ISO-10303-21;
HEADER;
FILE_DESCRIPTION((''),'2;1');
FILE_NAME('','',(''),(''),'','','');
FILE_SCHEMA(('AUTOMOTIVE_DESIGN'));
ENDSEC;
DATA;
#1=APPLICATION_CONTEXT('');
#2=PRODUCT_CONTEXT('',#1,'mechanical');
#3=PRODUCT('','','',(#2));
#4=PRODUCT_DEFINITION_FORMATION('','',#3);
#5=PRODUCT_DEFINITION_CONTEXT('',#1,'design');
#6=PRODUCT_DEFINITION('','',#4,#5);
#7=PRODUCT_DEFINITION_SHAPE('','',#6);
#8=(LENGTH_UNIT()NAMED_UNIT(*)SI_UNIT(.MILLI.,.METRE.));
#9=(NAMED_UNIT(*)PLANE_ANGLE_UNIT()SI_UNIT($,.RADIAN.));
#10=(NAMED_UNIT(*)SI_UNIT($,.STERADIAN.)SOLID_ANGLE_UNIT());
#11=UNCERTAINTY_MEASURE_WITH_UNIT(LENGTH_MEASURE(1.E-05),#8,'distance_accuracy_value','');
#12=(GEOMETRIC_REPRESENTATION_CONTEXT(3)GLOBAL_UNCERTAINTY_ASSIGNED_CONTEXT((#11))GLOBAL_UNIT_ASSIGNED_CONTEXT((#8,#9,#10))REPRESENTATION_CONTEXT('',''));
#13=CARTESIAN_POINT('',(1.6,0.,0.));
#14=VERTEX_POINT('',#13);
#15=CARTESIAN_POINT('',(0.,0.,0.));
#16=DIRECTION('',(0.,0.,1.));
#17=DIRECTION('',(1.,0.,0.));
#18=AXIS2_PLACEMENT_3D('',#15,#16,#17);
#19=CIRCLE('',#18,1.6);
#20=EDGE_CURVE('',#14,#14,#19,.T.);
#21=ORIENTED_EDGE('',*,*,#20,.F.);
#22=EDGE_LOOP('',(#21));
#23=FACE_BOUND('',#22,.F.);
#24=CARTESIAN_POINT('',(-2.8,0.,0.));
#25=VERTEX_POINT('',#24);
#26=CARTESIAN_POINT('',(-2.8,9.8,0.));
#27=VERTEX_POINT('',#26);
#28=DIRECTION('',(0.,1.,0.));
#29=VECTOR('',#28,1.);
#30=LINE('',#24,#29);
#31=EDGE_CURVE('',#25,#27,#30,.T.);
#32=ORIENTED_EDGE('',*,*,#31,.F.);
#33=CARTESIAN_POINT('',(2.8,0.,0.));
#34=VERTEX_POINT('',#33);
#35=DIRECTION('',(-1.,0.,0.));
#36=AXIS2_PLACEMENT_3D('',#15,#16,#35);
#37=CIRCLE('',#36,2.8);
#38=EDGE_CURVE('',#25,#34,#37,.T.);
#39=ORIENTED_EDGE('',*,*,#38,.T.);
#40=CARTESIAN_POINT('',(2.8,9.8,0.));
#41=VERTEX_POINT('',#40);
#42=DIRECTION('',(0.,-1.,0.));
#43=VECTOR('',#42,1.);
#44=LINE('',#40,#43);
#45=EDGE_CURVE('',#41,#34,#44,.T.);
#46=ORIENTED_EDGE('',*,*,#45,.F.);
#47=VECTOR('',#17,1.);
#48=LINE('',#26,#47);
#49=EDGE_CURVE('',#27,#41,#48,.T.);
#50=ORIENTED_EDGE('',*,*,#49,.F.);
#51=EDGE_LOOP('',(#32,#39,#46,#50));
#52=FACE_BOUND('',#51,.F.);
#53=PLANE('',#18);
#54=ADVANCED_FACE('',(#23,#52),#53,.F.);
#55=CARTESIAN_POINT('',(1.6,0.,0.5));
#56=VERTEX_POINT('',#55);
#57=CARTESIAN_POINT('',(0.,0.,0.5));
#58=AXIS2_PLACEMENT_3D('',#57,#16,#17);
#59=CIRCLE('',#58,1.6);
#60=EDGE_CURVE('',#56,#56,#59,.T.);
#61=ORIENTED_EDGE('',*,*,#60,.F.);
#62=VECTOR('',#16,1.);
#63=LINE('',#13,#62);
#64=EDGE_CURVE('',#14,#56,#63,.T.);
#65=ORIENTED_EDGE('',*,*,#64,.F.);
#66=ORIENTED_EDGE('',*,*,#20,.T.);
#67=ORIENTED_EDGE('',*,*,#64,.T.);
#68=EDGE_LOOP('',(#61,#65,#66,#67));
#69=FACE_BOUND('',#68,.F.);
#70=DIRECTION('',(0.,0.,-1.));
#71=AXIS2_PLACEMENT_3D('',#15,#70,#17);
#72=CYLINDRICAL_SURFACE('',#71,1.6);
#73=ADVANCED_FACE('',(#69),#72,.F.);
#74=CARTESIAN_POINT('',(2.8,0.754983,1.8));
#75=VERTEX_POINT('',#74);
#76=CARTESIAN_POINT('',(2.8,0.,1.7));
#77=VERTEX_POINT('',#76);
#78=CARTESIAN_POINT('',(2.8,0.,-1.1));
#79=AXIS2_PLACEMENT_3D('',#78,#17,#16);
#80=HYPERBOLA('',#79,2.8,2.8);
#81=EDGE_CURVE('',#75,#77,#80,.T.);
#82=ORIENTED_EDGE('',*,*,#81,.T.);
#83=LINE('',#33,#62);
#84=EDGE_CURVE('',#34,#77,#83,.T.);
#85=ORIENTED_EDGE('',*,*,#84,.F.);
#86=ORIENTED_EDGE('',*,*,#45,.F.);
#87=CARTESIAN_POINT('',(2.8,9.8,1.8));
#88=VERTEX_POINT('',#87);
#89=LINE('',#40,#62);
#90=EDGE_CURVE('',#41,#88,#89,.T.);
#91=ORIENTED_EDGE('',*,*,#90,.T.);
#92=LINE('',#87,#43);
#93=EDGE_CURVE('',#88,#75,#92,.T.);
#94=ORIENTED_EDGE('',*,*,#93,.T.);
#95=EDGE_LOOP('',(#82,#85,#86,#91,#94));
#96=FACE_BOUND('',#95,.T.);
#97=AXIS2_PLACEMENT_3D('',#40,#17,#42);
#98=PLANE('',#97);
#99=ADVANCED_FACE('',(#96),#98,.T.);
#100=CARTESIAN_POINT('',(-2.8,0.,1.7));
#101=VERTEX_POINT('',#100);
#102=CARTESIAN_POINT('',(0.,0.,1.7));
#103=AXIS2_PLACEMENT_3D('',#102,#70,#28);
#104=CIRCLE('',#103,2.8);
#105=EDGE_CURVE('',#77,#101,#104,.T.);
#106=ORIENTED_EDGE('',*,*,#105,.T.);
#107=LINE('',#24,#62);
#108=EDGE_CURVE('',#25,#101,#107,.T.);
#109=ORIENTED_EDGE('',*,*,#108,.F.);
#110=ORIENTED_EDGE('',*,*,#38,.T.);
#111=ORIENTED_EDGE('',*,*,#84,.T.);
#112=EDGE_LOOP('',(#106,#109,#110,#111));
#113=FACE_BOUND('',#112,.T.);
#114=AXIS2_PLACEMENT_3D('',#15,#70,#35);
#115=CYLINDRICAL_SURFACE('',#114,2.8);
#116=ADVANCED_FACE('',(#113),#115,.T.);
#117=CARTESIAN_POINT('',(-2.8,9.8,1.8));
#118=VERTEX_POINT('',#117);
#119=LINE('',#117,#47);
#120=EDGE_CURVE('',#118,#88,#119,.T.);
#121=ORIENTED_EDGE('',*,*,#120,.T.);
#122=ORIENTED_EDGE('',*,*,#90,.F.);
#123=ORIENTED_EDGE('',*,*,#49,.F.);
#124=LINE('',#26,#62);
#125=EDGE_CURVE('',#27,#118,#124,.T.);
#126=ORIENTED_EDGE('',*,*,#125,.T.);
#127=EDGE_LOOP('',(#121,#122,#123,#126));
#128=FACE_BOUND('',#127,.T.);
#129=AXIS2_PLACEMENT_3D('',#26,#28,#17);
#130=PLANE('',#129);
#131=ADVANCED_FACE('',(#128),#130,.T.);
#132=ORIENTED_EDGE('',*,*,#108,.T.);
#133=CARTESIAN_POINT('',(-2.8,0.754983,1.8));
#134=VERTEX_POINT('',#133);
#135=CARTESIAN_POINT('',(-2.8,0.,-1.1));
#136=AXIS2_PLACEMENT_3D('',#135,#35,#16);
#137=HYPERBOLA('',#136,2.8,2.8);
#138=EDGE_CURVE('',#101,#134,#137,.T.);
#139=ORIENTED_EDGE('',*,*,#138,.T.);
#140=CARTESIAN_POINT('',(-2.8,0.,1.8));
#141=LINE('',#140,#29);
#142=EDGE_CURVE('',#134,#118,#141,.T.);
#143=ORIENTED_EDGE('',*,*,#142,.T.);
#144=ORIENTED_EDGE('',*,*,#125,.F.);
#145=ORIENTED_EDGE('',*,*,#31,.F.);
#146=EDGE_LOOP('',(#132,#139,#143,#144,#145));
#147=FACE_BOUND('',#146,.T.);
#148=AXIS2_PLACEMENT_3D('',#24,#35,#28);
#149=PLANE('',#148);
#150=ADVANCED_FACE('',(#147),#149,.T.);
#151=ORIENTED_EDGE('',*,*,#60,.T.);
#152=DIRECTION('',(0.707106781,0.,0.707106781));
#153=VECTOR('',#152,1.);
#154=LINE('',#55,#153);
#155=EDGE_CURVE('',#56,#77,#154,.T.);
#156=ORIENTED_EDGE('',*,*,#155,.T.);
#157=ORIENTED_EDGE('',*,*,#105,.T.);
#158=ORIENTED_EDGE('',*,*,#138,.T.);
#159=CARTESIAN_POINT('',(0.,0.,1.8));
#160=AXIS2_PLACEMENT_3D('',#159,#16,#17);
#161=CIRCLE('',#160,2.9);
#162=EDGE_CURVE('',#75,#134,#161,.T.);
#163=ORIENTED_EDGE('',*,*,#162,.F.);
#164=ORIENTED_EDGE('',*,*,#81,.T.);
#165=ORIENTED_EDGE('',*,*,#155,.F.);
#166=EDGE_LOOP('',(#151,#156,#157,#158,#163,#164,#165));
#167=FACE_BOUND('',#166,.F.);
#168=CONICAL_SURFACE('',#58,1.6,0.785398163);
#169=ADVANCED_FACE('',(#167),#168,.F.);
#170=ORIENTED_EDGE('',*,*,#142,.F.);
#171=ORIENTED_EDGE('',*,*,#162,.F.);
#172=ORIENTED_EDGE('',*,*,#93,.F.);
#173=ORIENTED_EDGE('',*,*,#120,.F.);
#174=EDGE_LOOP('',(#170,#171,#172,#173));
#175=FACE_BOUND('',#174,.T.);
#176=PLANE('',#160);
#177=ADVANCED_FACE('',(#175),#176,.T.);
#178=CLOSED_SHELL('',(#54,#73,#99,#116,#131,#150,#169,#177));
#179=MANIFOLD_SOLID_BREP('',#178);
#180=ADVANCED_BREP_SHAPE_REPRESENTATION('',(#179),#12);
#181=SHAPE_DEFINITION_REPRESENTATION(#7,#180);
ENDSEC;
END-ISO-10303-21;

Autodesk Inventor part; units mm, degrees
ref_plane "YZ Plane" through (0, 0, 0) normal (1, 0, 0) x (0, 1, 0)
ref_plane "XZ Plane" through (0, 0, 0) normal (0, 1, 0) x (-1, 0, 0)
ref_plane "XY Plane" through (0, 0, 0) normal (0, 0, 1) x (1, 0, 0)
sketch "Sketch1" plane through (0, 0, 0) normal (0, 0, 1) x (1, 0, 0)
  arc A0 (-2.8, 0) -> (2.8, 0) centre (0, 0) ccw
  circle A1 centre (0, 0) radius 1.6
  line L0 (-2.8, 0) -> (-2.8, 9.8)
  line L1 (-2.8, 9.8) -> (2.8, 9.8)
  line L2 (2.8, 9.8) -> (2.8, 0)
  dimension "d0" = 3.2
  dimension "d1" = 2.8
  dimension "d2" = 9.8
extrude "Extrusion1" add sketch "Sketch1" along normal blind 1.8
chamfer "Chamfer1" distance 1.3 angle 45 1 edges at (-1.6, 0, 1.8)
